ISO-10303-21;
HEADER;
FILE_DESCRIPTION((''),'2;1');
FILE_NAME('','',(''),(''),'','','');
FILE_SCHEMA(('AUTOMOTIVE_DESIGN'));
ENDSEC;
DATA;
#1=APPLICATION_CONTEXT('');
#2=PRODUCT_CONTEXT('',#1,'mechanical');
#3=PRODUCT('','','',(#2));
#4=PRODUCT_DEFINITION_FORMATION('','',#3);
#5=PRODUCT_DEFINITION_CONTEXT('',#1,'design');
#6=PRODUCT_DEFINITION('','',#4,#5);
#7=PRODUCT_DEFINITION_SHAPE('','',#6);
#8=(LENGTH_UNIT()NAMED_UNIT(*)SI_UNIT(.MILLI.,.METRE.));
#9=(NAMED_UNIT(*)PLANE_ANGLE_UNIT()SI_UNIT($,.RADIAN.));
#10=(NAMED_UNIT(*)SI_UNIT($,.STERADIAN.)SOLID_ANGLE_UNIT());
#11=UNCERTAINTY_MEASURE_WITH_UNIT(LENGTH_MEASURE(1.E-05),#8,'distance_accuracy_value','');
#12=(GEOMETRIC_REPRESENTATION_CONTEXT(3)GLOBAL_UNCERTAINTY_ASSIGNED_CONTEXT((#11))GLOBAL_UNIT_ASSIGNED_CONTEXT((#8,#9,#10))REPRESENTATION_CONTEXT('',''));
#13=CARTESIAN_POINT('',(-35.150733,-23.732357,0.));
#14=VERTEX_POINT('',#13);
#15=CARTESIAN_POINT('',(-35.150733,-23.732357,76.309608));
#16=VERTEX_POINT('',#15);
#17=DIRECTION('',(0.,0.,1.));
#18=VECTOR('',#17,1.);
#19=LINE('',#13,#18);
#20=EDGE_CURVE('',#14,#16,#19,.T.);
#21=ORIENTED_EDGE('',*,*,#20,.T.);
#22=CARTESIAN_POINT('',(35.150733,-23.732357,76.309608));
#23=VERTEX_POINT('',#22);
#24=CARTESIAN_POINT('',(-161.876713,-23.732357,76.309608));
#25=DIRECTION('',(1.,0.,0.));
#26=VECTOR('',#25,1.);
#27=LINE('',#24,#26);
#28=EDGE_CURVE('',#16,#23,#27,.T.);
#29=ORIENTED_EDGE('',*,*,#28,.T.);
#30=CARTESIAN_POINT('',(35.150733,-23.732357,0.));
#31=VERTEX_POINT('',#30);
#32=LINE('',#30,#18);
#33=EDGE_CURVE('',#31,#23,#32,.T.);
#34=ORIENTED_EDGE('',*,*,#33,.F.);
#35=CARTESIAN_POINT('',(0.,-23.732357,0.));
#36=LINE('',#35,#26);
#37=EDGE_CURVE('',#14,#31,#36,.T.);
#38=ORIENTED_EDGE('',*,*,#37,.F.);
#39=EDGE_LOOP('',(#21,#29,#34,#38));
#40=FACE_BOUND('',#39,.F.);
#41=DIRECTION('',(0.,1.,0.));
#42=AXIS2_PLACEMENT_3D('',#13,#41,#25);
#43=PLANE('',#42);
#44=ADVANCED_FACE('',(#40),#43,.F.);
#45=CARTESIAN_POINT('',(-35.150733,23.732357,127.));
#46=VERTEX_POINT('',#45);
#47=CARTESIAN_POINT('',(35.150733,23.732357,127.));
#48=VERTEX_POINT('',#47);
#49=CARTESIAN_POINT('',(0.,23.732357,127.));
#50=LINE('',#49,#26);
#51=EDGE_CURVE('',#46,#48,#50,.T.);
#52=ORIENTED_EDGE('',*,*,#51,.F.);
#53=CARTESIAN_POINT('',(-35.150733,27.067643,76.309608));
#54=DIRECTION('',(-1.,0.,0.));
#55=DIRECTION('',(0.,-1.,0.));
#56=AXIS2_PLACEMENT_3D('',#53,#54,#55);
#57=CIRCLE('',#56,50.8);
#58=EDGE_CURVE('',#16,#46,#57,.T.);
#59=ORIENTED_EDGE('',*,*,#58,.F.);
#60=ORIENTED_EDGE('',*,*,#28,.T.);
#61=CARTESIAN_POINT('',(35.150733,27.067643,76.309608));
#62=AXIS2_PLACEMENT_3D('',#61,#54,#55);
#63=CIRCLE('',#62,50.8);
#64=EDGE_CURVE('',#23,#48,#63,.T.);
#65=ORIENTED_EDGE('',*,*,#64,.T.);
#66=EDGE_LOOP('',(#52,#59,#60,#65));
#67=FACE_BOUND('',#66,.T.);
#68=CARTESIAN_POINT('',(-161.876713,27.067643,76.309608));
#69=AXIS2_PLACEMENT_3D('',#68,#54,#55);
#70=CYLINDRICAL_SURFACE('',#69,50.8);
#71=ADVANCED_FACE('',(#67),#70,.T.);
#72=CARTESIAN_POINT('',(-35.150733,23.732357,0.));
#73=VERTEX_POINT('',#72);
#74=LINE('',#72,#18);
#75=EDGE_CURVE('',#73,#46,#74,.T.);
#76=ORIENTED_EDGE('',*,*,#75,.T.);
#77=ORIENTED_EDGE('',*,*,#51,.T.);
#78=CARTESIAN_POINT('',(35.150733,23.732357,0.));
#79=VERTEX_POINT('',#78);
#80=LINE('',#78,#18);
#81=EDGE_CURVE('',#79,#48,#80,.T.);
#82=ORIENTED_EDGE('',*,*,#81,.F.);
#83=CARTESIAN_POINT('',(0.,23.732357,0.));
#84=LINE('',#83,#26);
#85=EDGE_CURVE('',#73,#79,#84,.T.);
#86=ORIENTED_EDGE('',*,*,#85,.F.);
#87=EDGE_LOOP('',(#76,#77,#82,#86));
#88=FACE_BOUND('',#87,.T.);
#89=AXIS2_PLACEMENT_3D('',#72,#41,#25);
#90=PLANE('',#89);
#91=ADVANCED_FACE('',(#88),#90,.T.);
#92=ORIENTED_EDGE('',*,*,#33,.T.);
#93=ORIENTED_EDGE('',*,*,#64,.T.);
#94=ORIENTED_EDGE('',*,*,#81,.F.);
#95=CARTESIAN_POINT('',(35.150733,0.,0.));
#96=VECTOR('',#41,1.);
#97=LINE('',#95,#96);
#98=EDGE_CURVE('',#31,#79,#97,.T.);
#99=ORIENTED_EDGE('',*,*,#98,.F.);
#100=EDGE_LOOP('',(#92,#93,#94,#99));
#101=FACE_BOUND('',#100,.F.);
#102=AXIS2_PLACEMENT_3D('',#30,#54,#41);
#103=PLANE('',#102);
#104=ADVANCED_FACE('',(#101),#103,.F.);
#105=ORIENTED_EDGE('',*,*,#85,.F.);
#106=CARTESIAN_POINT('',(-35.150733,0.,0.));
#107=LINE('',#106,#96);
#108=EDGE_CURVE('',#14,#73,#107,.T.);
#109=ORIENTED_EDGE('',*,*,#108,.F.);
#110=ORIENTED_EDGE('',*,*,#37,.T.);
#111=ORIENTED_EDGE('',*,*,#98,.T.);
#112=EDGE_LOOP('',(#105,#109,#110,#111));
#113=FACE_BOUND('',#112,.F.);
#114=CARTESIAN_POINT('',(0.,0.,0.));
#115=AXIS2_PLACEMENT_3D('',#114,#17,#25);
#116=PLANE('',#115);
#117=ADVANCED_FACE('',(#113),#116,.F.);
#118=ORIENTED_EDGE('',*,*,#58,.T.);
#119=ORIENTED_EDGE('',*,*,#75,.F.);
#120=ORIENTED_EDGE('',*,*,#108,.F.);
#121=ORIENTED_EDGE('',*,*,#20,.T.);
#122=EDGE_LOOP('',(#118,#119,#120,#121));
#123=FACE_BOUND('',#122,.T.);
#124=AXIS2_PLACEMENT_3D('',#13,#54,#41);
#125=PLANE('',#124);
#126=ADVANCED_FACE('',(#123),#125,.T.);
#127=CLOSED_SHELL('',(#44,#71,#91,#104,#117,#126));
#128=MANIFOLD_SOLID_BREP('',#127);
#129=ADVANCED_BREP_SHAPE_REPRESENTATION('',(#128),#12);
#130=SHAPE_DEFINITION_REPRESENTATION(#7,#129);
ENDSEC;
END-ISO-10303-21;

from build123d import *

# Parameters (mm, degrees)
F1_W        = 70.3014656901
F1_H        = 47.4647134542
F0_DEPTH    = 127
F2_T1_DEPTH = 323.753426802


# Not quite as in the source:
# - a fillet or chamfer that OpenCascade refuses, or shapes differently, is made with other operations: its cross-section is extruded or revolved along the edge and cut away or added


with BuildPart() as f0:
    # F1 (on Top) → F0 (new body)
    with BuildSketch(Plane.XY):
        Rectangle(F1_W, F1_H)
    extrude(amount=F0_DEPTH)

    # F2: fillet of radius 50.8 on 1 edges, made by hand

    # F2_s2 → F2_t1 (cut)
    with BuildSketch(Plane.YZ.offset(-161.876713401)):
        with BuildLine():
            ThreePointArc((-23.7323567271, 76.3096077776), (-10.0138383354, 111.0314124793), (23.7323567271, 127))
            Line((23.7323567271, 127), (-23.7323567271, 127))
            Line((-23.7323567271, 127), (-23.7323567271, 76.3096077776))
        make_face()
    extrude(amount=F2_T1_DEPTH, mode=Mode.SUBTRACT)


solid = f0.part
